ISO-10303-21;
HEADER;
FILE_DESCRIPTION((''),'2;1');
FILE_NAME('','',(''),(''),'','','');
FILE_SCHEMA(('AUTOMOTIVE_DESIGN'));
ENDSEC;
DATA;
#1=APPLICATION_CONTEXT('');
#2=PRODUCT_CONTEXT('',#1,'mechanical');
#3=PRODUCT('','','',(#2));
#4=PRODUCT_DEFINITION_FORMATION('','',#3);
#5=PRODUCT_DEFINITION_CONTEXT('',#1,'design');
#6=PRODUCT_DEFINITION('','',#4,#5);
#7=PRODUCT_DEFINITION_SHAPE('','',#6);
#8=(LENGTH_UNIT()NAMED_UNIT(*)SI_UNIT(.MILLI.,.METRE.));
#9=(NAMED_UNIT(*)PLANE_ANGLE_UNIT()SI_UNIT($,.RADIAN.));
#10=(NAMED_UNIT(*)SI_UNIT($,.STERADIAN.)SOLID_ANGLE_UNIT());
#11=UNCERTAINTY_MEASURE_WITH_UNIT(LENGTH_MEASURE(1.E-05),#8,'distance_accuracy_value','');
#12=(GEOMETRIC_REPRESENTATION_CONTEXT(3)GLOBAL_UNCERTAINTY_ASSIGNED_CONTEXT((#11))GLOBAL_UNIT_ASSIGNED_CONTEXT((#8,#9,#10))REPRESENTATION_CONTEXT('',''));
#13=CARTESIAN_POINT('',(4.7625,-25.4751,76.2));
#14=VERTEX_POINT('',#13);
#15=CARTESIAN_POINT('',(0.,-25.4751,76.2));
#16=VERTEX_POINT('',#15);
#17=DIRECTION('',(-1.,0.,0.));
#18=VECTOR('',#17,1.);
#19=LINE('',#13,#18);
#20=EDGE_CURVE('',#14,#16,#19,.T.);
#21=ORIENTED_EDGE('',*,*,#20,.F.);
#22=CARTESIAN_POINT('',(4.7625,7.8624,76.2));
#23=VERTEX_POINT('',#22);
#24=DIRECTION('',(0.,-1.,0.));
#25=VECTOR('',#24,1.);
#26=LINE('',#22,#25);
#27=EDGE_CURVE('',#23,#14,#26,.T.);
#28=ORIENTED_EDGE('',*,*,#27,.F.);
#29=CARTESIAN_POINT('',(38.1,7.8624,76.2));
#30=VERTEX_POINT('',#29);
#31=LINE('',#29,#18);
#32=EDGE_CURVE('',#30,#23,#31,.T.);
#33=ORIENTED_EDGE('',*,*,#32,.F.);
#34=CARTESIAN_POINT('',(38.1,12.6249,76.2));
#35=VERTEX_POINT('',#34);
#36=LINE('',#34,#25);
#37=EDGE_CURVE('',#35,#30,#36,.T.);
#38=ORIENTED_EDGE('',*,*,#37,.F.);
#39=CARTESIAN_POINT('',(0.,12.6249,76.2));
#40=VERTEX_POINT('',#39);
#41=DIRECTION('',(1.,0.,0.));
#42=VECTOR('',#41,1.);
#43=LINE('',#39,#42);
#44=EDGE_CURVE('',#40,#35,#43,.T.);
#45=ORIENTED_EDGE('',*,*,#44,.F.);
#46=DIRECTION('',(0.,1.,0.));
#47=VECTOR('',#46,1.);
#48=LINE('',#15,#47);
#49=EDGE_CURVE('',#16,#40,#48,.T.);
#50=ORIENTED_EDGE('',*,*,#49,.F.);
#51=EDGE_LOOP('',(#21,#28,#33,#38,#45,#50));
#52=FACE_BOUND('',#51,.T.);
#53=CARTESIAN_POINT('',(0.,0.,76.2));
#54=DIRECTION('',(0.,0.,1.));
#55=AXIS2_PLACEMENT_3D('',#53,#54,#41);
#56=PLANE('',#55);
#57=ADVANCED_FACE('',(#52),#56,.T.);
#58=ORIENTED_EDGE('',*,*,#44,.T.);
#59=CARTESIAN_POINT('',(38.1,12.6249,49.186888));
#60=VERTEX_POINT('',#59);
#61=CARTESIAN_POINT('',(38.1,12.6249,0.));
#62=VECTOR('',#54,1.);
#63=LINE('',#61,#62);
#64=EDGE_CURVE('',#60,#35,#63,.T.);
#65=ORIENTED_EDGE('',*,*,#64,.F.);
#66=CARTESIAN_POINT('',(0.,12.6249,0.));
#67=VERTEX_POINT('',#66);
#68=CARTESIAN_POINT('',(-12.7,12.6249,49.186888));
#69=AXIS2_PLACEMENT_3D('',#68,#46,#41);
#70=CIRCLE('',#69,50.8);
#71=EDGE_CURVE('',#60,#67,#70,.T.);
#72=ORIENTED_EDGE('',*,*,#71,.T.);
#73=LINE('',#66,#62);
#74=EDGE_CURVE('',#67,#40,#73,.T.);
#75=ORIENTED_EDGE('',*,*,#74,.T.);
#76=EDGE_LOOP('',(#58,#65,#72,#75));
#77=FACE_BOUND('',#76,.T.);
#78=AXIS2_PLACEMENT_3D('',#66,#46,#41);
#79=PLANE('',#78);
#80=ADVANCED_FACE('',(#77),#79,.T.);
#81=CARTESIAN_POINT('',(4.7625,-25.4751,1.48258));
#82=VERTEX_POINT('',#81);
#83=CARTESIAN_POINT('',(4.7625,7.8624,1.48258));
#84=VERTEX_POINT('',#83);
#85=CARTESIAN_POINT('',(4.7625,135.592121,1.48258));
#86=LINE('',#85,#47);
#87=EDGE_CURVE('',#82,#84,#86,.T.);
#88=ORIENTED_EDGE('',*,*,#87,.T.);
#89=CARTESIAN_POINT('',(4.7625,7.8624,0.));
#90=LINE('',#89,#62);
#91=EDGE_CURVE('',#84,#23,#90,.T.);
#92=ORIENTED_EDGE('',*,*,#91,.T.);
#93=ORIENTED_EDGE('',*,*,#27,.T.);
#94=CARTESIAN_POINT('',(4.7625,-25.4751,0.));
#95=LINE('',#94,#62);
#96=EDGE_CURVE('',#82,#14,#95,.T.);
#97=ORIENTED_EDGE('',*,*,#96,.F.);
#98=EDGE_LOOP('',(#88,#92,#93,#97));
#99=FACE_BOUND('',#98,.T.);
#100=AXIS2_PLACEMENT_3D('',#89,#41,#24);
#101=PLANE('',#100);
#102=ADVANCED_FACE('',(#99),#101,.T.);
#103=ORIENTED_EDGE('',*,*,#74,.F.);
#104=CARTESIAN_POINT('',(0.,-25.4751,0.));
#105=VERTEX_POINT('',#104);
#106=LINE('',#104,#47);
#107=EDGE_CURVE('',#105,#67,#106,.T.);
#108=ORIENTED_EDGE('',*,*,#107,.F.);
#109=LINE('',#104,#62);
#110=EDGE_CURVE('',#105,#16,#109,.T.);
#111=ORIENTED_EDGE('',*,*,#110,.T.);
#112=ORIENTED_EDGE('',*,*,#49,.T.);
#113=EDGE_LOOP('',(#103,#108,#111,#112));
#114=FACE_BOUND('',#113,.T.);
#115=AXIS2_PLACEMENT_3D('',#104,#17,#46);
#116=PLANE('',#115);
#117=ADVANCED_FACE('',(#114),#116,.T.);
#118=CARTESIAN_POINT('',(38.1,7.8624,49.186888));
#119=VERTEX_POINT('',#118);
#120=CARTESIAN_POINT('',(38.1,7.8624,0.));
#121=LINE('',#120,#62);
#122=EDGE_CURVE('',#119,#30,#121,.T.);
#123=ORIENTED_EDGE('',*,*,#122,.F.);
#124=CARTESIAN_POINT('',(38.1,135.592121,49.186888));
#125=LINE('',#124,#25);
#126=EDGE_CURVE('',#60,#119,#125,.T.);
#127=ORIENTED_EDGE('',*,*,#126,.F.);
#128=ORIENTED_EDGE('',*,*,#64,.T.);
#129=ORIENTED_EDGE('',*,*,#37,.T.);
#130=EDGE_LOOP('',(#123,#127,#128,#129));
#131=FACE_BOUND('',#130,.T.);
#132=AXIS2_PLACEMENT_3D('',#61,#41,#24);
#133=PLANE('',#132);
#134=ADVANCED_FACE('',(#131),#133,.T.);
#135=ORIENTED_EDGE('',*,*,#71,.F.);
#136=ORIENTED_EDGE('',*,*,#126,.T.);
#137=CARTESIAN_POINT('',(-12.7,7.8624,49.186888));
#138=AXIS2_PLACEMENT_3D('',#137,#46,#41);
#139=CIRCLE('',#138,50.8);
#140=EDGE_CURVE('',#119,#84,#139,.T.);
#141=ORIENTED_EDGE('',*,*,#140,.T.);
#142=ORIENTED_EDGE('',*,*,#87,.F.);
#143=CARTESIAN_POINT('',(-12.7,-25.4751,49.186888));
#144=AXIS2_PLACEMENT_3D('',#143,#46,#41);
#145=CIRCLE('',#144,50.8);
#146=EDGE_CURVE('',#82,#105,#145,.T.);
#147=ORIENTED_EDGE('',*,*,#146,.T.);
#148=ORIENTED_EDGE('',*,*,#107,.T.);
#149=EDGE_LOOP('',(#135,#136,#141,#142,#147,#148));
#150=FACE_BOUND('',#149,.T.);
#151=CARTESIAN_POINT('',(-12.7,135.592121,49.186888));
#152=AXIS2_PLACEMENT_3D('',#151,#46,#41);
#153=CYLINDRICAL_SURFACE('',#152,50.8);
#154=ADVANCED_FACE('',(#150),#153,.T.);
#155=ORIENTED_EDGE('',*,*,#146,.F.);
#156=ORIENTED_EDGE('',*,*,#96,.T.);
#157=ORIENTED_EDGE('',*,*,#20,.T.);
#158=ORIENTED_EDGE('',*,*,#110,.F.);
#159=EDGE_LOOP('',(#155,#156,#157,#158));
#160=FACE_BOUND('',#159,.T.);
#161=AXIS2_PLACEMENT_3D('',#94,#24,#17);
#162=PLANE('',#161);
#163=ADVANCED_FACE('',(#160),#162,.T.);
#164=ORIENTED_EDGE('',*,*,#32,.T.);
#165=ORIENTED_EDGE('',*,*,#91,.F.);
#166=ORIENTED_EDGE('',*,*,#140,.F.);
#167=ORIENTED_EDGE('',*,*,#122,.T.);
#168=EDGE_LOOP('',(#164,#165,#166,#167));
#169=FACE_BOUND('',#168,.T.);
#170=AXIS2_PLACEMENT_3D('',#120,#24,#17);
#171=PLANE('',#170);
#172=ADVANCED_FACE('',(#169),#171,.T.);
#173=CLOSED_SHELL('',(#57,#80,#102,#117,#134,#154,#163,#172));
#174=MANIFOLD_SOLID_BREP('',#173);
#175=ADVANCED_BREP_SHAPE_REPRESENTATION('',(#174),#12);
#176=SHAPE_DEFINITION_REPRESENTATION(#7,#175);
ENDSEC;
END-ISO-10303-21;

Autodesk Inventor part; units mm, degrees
ref_plane "YZ Plane" through (0, 0, 0) normal (1, 0, 0) x (0, 1, 0)
ref_plane "XZ Plane" through (0, 0, 0) normal (0, 1, 0) x (-1, 0, 0)
ref_plane "XY Plane" through (0, 0, 0) normal (0, 0, 1) x (1, 0, 0)
sketch "Sketch1" plane through (0, 0, 0) normal (0, 0, 1) x (1, 0, 0)
  line L0 (0, 12.6249) -> (38.1, 12.6249)
  line L1 (38.1, 12.6249) -> (38.1, 7.8624)
  line L2 (38.1, 7.8624) -> (4.7625, 7.8624)
  line L3 (4.7625, 7.8624) -> (4.7625, -25.4751)
  line L4 (4.7625, -25.4751) -> (0, -25.4751)
  line L5 (0, -25.4751) -> (0, 12.6249)
  point P0 (0, 0)
  point P1 (0, 0)
  dimension "d0" = 38.1
  dimension "d1" = 4.7625
  dimension "d2" = 4.7625
  dimension "d3" = 38.1
extrude "Extrusion1" add sketch "Sketch1" along normal blind 76.2
fillet "Corner Round1" radius 50.8 1 edges at (38.1, 10.2436, 0)
equation "\"BendRadius\" = Thickness"
equation "\"BendReliefWidth\" = Thickness"
equation "\"BendReliefDepth\" = 0.5 * Thickness"
equation "\"CornerReliefSize\" = 4 * Thickness"
equation "\"MinimumRemnant\" = 2 * Thickness"
equation "\"TransitionRadius\" = BendRadius"
equation "\"JacobiRadiusSize\" = BendRadius"
equation "\"GapSize\" = Thickness"
equation "\"Thickness\" = 4.7625"
properties part number "RearWheelMountLeft" material "Steel, Mild"
